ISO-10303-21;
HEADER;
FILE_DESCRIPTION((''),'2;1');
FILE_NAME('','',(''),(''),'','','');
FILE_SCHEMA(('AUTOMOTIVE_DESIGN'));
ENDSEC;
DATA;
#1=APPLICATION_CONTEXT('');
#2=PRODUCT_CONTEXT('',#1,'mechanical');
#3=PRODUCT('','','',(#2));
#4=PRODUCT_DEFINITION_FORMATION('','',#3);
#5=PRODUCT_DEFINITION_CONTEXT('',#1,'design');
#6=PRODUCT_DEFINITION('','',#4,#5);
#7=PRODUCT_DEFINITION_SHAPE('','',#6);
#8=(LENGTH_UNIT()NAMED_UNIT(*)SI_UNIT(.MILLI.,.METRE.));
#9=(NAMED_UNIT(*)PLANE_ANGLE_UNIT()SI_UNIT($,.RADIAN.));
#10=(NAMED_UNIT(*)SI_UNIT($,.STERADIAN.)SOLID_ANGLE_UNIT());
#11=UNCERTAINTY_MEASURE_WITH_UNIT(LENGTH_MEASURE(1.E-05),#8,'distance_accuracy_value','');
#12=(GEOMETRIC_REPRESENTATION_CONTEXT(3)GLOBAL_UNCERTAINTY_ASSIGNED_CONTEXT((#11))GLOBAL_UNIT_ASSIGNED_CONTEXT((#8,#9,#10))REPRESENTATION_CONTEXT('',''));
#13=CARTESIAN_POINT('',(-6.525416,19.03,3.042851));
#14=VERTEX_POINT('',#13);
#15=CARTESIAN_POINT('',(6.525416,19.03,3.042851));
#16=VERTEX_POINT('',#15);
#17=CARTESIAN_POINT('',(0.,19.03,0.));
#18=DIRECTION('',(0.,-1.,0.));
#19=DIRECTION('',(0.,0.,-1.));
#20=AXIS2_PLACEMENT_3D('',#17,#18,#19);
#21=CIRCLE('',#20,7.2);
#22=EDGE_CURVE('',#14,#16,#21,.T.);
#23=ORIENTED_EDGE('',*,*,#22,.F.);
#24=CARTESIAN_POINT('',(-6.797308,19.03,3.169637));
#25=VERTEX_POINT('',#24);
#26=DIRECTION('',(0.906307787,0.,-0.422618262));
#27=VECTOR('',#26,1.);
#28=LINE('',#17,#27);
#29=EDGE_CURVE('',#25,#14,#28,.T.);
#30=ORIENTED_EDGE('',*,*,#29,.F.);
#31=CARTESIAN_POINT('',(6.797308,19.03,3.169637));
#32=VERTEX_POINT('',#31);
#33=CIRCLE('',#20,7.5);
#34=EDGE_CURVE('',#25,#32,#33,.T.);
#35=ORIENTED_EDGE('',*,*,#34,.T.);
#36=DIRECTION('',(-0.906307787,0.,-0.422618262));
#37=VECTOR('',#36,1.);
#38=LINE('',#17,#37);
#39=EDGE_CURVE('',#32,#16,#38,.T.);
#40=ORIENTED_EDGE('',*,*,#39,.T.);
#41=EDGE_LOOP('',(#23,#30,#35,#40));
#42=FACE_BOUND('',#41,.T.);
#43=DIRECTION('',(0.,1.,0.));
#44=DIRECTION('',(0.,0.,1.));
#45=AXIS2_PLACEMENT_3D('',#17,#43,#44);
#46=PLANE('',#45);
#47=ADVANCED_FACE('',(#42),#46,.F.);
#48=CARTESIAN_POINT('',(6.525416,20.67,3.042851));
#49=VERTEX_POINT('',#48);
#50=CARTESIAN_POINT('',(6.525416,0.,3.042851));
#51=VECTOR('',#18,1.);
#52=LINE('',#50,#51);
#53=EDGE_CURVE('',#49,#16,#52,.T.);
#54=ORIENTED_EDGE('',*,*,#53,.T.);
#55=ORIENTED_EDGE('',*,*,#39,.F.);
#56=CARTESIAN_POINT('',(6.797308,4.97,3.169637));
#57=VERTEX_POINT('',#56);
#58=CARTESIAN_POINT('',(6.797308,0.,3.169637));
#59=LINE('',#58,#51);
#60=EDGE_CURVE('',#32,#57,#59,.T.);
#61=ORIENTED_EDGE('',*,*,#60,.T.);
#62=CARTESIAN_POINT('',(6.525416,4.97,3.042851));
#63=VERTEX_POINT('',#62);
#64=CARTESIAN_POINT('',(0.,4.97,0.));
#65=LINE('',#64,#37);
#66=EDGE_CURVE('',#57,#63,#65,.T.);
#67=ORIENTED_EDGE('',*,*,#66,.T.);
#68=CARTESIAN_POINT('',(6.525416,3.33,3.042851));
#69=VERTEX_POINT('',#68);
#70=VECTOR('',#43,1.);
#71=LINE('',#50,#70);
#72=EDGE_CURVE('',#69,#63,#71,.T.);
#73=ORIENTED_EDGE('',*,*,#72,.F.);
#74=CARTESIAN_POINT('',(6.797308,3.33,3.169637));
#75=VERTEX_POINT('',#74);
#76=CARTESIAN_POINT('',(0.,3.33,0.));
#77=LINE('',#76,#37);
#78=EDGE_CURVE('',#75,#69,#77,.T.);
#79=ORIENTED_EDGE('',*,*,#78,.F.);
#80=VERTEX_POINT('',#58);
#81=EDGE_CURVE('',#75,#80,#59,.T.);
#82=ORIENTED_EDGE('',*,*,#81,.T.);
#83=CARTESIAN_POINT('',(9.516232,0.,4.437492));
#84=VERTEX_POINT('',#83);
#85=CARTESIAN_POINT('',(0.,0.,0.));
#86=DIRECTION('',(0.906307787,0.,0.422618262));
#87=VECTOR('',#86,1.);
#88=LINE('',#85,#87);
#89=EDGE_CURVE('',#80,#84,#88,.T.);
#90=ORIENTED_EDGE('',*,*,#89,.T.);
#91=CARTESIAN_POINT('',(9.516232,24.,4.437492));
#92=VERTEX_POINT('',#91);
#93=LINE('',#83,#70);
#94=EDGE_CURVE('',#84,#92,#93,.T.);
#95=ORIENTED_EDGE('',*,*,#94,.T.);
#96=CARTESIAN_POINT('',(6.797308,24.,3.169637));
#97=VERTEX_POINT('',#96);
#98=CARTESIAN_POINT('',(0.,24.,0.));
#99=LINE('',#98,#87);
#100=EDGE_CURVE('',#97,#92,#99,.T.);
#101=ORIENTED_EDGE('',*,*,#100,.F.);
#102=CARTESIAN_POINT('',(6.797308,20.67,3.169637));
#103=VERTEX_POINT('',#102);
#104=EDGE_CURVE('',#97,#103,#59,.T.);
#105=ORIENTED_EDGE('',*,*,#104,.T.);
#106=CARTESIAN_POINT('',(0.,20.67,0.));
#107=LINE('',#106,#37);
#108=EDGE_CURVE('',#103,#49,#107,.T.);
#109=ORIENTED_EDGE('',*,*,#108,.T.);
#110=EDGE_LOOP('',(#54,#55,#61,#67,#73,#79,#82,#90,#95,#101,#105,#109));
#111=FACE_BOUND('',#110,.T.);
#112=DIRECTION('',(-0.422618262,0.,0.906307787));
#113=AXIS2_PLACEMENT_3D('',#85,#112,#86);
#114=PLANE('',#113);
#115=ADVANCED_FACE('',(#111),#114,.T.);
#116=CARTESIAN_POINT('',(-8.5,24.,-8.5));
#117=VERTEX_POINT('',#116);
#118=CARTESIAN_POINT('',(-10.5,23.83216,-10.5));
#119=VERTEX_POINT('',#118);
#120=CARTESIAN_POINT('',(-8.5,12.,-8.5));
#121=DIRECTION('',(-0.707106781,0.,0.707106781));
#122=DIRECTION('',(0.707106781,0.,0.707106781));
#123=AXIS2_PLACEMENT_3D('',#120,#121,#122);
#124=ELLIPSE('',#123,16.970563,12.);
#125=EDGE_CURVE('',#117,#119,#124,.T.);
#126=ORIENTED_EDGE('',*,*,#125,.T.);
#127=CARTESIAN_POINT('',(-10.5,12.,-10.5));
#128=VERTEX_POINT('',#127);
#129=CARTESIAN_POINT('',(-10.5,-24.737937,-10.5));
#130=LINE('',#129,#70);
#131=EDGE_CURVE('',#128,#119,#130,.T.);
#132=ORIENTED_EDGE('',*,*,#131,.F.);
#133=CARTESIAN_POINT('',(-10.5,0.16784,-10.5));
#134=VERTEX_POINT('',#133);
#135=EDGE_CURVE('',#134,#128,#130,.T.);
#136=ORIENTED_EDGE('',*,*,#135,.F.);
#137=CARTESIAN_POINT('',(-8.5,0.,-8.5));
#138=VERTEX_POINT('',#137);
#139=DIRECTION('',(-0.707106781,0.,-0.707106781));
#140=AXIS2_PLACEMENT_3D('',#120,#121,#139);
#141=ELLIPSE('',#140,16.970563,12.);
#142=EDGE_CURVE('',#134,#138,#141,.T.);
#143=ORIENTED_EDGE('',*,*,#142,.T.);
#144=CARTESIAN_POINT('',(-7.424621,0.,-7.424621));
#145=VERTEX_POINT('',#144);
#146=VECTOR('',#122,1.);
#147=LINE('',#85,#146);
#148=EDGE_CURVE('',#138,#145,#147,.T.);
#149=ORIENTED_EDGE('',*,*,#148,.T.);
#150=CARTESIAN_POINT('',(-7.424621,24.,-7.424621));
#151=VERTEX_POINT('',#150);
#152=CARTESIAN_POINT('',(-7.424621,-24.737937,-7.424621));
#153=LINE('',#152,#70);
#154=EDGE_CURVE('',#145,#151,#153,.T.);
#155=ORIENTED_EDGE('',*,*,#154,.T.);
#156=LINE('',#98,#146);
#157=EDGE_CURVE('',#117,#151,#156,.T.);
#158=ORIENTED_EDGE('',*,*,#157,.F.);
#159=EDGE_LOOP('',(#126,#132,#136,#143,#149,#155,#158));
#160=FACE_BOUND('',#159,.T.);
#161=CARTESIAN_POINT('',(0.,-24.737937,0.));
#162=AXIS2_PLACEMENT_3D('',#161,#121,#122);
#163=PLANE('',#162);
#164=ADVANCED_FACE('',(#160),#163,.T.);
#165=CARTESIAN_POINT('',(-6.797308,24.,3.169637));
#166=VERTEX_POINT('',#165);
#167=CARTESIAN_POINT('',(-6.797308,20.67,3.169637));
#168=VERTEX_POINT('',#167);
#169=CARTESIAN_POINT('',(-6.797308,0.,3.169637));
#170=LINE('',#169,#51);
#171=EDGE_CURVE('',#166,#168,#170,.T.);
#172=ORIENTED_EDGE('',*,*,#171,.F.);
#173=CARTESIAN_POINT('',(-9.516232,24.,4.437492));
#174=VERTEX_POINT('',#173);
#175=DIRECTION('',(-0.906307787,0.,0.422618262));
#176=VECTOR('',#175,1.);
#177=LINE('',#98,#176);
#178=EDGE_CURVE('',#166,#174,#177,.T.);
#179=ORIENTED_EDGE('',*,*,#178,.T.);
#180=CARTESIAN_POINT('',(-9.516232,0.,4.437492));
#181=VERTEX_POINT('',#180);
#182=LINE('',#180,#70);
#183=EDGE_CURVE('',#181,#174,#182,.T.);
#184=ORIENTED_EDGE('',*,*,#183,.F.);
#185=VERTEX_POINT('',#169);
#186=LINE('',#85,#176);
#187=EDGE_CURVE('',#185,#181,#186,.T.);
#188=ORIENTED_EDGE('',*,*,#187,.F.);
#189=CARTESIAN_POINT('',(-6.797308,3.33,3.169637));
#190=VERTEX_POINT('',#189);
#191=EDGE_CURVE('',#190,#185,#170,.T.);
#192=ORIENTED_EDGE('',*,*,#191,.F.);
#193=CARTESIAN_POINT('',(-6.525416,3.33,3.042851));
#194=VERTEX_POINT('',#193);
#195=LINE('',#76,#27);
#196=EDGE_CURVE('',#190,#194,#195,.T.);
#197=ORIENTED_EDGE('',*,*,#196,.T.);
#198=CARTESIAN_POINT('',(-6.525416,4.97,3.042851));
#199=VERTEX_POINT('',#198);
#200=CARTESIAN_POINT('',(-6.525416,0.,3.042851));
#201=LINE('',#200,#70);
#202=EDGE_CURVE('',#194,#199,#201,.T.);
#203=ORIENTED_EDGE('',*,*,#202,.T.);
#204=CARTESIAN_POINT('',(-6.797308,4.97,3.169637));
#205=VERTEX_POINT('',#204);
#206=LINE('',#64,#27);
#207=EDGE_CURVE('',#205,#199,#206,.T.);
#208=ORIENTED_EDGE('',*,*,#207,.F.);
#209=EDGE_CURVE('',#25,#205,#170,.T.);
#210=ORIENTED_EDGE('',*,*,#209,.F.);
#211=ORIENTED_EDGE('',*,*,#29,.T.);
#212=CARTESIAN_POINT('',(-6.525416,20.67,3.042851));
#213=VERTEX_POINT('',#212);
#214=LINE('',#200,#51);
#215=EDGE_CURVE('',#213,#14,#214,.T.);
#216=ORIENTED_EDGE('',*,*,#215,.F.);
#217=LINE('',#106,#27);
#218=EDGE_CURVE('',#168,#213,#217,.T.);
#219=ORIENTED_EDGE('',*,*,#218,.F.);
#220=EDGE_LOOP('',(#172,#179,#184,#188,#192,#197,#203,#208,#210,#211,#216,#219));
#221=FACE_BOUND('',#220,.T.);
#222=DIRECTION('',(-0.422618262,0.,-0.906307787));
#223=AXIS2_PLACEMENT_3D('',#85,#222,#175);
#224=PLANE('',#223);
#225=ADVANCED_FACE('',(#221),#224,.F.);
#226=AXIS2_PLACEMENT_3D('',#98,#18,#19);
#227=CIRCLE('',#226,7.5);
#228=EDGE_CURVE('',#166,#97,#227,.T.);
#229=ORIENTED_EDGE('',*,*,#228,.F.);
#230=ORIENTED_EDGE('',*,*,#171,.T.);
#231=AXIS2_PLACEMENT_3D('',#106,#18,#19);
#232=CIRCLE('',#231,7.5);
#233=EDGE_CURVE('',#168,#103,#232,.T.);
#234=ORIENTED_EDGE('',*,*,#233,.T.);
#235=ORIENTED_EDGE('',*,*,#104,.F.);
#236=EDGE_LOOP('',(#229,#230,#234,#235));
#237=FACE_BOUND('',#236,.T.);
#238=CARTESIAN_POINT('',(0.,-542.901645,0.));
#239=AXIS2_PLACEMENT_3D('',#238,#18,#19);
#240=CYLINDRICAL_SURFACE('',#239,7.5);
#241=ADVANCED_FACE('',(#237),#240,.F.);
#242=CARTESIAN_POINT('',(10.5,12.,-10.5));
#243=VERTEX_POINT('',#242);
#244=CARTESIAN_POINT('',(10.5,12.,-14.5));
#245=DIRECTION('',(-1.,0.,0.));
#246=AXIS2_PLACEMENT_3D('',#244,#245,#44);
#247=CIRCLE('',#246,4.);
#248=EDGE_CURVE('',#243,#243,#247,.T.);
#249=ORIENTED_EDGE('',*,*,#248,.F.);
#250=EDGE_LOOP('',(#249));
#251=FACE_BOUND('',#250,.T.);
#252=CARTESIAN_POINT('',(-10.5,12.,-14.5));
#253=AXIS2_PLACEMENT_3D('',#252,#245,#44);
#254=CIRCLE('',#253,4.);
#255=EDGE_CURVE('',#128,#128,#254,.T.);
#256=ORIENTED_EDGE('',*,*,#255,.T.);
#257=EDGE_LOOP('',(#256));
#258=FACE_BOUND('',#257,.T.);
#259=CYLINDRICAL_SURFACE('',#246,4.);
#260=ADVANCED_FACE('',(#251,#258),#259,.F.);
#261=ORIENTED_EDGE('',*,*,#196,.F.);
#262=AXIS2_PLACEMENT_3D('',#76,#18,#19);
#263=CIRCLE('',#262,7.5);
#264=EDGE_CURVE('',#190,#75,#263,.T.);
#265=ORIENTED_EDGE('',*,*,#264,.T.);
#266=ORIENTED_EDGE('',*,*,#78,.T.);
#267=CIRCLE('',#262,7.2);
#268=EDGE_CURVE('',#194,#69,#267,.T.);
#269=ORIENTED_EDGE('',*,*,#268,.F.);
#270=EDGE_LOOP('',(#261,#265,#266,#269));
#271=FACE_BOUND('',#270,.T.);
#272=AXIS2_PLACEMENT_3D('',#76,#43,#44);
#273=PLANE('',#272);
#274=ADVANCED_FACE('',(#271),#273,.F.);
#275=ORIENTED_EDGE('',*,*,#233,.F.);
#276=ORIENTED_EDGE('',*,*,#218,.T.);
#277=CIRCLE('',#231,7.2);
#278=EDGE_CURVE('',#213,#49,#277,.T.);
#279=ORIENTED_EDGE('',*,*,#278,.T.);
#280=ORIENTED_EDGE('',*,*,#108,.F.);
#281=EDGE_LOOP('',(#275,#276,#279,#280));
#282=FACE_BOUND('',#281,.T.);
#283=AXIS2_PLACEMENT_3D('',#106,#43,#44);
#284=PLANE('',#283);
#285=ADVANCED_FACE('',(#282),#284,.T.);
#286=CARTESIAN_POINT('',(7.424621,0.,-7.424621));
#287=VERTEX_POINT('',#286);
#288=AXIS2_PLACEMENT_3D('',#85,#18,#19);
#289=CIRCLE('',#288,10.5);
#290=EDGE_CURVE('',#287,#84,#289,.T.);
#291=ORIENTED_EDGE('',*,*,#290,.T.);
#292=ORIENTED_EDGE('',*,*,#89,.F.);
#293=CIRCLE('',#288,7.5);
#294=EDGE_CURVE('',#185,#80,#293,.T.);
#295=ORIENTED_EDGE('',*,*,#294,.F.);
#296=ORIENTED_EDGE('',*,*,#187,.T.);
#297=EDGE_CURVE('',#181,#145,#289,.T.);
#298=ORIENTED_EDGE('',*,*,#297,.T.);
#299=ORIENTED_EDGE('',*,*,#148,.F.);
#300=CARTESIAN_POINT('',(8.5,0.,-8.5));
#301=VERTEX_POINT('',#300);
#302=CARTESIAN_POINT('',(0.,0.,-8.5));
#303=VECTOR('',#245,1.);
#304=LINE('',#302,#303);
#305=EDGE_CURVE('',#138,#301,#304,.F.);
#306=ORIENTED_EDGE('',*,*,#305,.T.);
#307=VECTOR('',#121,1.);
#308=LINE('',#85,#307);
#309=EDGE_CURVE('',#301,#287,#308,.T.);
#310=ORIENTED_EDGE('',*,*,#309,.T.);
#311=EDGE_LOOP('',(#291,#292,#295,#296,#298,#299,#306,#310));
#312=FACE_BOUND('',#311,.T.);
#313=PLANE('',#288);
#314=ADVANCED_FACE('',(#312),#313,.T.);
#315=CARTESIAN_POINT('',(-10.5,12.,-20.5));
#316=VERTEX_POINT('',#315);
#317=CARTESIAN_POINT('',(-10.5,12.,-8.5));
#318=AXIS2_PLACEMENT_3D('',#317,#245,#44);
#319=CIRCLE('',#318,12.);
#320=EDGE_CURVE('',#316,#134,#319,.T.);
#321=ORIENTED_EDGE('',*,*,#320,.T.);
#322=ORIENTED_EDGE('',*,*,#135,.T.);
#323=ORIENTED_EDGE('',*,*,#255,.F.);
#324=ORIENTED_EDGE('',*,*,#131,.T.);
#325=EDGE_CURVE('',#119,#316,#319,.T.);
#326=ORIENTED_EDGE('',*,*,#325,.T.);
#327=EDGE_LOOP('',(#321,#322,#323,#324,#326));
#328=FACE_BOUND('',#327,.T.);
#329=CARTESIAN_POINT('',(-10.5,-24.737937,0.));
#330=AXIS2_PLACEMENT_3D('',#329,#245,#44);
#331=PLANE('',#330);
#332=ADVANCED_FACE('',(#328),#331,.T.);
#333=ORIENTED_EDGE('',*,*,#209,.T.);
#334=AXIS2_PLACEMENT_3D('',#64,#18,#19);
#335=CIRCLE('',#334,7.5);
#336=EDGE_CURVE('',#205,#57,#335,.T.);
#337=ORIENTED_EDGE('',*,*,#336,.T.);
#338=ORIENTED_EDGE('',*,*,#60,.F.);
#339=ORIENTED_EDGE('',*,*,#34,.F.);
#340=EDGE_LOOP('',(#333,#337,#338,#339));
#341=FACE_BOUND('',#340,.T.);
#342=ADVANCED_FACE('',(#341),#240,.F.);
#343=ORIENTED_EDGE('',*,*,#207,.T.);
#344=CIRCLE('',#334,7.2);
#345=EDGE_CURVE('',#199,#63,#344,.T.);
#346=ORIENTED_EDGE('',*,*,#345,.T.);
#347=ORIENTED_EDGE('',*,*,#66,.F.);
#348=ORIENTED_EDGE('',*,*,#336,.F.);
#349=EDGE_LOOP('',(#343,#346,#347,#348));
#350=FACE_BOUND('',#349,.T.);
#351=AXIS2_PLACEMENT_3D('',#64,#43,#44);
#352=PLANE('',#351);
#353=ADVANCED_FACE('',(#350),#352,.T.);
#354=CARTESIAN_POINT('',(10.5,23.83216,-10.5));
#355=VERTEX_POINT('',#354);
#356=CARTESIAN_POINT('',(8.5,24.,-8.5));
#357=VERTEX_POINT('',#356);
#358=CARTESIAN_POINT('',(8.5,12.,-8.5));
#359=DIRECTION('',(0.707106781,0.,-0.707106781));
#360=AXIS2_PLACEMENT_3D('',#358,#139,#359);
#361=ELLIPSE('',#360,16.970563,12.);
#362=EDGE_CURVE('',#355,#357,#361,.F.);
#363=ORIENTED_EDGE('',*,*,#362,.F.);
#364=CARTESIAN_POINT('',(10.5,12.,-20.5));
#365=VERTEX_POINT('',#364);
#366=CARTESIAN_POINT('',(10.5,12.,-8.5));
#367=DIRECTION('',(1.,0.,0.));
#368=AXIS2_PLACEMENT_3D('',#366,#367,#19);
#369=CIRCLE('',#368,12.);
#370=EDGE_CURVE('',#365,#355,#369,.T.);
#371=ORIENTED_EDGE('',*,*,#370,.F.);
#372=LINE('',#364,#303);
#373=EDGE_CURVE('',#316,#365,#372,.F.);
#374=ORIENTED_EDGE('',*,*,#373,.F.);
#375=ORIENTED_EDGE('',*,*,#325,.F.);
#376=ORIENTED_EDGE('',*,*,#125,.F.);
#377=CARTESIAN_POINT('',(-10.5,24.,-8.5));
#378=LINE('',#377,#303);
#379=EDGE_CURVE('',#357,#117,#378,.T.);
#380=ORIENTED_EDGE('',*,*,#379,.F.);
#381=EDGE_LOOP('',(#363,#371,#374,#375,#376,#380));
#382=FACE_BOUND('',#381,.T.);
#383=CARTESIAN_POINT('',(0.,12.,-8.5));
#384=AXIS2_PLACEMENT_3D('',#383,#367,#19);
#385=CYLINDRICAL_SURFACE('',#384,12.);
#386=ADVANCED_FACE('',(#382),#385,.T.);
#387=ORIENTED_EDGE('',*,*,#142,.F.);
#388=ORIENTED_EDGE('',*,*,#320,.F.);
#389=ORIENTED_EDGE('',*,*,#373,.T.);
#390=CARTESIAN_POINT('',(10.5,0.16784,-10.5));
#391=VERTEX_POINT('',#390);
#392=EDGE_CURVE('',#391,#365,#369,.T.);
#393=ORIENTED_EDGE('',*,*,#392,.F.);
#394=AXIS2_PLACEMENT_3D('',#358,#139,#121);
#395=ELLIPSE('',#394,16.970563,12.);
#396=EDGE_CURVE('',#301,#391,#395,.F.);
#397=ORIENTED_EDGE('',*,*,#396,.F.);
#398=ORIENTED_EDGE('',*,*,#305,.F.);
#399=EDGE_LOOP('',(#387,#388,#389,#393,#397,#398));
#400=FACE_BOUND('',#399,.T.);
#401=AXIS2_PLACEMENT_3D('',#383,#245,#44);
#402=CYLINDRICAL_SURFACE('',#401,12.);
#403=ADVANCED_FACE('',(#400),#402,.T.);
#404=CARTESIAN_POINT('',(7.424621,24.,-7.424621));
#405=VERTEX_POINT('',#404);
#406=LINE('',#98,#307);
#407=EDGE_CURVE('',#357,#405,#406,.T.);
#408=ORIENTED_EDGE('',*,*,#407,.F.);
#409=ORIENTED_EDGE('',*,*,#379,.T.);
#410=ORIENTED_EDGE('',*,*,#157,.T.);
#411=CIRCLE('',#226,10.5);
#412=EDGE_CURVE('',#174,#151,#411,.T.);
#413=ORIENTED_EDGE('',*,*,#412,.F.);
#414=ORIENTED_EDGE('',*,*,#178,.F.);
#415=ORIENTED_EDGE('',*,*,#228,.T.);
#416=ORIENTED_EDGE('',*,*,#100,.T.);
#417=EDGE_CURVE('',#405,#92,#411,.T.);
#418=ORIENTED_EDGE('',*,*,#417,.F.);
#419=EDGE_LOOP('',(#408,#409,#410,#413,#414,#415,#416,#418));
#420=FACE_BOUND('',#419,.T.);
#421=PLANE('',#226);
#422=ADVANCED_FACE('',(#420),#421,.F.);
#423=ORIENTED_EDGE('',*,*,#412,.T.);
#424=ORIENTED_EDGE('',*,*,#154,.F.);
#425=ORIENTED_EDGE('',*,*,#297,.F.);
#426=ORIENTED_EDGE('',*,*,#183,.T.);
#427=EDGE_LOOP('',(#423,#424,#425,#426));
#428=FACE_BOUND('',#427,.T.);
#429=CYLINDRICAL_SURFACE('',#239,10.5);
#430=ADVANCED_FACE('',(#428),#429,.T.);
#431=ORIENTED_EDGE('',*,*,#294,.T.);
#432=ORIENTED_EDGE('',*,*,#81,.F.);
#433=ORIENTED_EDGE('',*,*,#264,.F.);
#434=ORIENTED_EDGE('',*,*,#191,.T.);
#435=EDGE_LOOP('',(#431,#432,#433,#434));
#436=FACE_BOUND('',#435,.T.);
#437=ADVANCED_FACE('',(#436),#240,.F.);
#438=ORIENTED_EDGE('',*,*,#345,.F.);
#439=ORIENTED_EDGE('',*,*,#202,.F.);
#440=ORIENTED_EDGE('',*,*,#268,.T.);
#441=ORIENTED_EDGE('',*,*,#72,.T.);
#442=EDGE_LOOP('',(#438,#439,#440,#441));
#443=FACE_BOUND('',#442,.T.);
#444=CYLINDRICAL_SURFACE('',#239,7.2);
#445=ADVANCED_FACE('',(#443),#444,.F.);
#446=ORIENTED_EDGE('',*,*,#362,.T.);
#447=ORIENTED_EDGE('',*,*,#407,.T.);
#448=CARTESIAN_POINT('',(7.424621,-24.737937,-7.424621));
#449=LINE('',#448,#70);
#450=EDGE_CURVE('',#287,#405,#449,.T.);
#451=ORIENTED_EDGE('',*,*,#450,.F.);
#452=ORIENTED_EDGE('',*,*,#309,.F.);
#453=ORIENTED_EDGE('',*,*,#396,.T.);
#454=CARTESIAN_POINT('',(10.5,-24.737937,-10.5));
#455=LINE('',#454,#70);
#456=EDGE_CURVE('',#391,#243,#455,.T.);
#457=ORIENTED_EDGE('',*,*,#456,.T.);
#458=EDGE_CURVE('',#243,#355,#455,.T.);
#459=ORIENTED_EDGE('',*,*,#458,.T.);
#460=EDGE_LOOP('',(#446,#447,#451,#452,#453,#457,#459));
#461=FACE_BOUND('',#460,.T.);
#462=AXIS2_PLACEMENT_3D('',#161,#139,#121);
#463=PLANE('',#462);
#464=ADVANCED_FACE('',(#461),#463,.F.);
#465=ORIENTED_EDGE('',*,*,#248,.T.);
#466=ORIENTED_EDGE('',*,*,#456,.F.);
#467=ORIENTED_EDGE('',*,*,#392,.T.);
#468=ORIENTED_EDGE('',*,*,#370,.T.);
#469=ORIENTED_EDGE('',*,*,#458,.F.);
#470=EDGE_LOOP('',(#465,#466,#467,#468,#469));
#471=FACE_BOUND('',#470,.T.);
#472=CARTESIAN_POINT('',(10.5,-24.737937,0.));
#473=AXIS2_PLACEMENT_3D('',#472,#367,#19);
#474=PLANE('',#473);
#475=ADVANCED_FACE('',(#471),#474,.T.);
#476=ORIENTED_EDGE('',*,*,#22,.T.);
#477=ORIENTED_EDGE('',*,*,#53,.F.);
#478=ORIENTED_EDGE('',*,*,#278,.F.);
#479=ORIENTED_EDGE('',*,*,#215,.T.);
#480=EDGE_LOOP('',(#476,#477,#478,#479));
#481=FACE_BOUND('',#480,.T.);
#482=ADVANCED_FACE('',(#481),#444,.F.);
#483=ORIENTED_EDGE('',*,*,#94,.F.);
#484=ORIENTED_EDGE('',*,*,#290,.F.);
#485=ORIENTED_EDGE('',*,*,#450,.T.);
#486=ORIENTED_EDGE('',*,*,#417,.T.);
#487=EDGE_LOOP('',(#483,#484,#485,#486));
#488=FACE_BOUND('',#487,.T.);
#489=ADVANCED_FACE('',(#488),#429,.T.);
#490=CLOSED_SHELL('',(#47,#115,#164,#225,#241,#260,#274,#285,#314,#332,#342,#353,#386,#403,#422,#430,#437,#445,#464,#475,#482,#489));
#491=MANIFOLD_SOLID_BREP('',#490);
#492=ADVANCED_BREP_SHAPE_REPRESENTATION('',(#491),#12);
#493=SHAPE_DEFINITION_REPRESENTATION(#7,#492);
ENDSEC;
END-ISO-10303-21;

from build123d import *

# Parameters (mm, degrees)
REVOLVE1_ANGLE      = 230
SKETCH2_W           = 21
SKETCH2_H           = 10
BOSS_EXTRUDE1_DEPTH = 24
FILLET1_R           = 12
SKETCH3_R           = 4
CUT_EXTRUDE1_DEPTH  = 38.911080175


with BuildPart() as part:
    # Sketch1 → Revolve1 (revolve, symmetric)
    with BuildSketch(Plane(origin=(0, 0, 0), x_dir=(0, 0, -1), z_dir=(1, 0, 0))) as revolve1_sk:
        Polygon((10.5, 24), (7.5, 24), (7.5, 20.67), (7.2, 20.67), (7.2, 19.03), (7.5, 19.03), (7.5, 4.97), (7.2, 4.97), (7.2, 3.33), (7.5, 3.33), (7.5, 0), (10.5, 0), align=None)
    revolve(axis=Axis((0, -542.901644974, 0), (0, 1, 0)), revolution_arc=REVOLVE1_ANGLE / 2)
    revolve(revolve1_sk.sketch, axis=Axis((0, -542.901644974, 0), (0, -1, 0)), revolution_arc=REVOLVE1_ANGLE / 2)

    # Sketch2 → Boss-Extrude1 (add)
    with BuildSketch(Plane(origin=(0, 24, 0), x_dir=(1, 0, 0), z_dir=(0, 1, 0))):
        with Locations((0, 15.5)):
            Rectangle(SKETCH2_W, SKETCH2_H)
        with BuildLine():
            Line((10.5, 10.5), (1.4e-08, 10.5))
            ThreePointArc((1.4e-08, 10.5), (4.018176046, 9.700735089), (7.424621202, 7.424621202))
            Line((7.424621202, 7.424621202), (10.5, 10.5))
        make_face()
        with BuildLine():
            Line((1.4e-08, 10.5), (-10.5, 10.5))
            Line((-10.5, 10.5), (-7.424621202, 7.424621202))
            ThreePointArc((-7.424621202, 7.424621202), (-4.018176034, 9.700735094), (1.4e-08, 10.5))
        make_face()
    extrude(amount=-BOSS_EXTRUDE1_DEPTH)

    # Fillet1
    fillet1_edges = [part.edges().sort_by_distance(p)[0] for p in [
        (0, 0, -20.5),
        (0, 24, -20.5),
    ]]
    fillet(fillet1_edges, radius=FILLET1_R - 0.0001)  # a hair under: the kernel refuses the full size

    # Sketch3 → Cut-Extrude1 (cut, through all)
    with BuildSketch(Plane.ZY.offset(10.5)):
        with Locations((-14.5, 12)):
            Circle(SKETCH3_R)
    extrude(amount=-CUT_EXTRUDE1_DEPTH, mode=Mode.SUBTRACT)


solid = part.part
